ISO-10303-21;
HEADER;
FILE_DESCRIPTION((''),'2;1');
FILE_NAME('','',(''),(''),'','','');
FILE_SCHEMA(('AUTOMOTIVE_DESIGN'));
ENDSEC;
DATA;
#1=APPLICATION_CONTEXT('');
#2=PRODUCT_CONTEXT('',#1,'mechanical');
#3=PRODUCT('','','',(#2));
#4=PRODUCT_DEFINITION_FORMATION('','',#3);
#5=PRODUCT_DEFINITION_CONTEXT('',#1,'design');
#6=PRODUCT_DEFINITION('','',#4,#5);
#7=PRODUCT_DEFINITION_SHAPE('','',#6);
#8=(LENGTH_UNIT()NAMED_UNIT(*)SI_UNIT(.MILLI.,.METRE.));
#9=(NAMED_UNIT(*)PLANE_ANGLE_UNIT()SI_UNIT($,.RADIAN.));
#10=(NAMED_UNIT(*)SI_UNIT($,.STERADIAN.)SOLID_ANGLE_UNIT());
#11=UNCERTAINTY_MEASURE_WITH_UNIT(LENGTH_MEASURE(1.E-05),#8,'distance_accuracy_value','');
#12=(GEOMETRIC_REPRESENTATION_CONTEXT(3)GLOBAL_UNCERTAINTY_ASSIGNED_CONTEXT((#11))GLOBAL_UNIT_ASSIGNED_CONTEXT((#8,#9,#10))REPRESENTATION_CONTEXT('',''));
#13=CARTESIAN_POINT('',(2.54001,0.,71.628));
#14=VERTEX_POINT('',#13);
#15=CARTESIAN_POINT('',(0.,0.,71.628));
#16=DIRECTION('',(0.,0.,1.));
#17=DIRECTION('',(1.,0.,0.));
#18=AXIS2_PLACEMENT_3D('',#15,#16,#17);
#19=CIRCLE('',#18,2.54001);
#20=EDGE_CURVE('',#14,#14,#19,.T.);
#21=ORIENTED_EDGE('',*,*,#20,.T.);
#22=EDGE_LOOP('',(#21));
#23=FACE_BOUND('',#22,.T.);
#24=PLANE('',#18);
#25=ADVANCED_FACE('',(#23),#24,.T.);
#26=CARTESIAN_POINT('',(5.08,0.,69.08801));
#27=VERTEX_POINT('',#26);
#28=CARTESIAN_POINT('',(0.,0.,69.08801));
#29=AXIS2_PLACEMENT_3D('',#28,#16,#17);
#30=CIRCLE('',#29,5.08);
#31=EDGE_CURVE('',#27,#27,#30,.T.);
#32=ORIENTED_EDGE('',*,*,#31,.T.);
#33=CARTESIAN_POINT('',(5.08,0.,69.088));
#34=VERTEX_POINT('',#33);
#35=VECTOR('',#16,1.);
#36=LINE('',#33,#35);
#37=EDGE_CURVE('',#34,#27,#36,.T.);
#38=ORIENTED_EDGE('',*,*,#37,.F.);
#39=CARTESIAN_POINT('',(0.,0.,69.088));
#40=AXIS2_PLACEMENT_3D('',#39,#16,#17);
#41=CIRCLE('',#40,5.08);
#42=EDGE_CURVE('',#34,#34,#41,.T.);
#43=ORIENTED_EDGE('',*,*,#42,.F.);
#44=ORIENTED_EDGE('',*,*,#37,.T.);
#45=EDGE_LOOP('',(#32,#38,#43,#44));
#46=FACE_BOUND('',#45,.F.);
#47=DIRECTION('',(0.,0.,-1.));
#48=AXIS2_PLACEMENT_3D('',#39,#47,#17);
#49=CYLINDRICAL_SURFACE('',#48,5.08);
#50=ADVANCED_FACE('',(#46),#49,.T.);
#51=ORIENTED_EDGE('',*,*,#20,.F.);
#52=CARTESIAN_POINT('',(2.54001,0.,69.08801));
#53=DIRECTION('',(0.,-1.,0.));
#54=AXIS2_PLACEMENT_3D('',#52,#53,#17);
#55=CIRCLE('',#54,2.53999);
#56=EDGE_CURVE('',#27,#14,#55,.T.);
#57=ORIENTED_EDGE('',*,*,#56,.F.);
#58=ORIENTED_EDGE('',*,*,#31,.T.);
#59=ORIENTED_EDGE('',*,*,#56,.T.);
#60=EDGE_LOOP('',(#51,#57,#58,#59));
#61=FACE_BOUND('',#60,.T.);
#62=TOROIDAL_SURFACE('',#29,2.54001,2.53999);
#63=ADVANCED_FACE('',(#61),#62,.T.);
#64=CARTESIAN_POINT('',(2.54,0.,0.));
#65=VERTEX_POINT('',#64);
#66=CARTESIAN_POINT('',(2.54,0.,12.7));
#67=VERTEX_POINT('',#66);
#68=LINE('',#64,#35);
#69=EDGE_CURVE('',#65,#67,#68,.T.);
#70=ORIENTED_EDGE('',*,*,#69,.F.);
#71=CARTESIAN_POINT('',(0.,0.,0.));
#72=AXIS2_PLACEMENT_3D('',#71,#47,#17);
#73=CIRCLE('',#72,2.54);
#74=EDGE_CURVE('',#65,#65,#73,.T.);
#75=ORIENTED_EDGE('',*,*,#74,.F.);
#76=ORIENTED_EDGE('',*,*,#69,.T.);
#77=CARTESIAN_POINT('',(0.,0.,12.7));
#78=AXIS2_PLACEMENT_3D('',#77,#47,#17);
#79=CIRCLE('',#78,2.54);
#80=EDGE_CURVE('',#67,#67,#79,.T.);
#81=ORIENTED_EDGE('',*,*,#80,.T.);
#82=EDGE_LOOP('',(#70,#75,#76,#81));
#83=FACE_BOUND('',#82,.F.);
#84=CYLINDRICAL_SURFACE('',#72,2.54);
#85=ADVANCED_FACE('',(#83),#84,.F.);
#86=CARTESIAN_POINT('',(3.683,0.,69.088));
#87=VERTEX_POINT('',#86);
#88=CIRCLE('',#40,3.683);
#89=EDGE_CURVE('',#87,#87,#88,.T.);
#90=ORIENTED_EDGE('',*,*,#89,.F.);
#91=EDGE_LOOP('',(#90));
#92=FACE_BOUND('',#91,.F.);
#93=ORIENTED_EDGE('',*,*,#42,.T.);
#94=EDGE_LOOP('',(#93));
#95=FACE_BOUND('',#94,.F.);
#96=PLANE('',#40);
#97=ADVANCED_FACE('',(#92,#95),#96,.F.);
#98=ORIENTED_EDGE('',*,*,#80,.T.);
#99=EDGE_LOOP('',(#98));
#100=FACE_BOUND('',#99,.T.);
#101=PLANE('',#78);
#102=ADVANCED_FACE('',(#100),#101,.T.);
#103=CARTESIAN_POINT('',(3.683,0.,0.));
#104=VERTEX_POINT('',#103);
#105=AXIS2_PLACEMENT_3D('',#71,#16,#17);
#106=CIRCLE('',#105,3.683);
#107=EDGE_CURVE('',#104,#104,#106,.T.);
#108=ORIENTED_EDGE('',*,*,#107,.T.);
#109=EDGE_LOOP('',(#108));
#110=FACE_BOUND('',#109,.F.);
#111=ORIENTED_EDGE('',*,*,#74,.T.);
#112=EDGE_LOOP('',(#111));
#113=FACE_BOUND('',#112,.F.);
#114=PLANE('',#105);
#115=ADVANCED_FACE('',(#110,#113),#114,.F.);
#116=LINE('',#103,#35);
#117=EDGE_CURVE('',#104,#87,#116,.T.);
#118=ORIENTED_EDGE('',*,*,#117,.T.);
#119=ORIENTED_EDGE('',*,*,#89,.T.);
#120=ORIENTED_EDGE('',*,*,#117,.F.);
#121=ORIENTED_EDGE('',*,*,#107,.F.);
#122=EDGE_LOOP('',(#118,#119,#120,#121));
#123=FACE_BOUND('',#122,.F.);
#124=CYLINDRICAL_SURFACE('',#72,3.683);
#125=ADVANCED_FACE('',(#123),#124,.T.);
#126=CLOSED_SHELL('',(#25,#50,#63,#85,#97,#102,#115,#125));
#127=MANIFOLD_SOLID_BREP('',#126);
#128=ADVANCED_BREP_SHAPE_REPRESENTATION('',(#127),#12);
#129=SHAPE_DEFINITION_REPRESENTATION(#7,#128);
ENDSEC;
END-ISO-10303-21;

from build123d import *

# Parameters (mm, degrees)
F0_R     = 3.683
F1_DEPTH = 69.088
F2_R     = 5.08
F3_DEPTH = 2.54
F4_R     = 2.53999
F5_R     = 2.54
F6_DEPTH = 12.7


# Not quite as in the source:
# - a fillet or chamfer is up to 0.001 mm smaller than in the source, because OpenCascade refuses the exact size


with BuildPart() as f1:
    # F0 (on Top) → F1 (new body)
    with BuildSketch(Plane.XY):
        Circle(F0_R)
    extrude(amount=F1_DEPTH)

    # F2 (on face) → F3 (join)
    with BuildSketch(Plane.XY.offset(69.088)):
        Circle(F2_R)
    extrude(amount=F3_DEPTH)

    # F4 (radius 2.54 in the source; OpenCascade refuses exactly that, so slightly less here)
    f4_edges = [f1.edges().sort_by_distance(p)[0] for p in [
        (-5.08, 0, 71.628),
    ]]
    fillet(f4_edges, radius=F4_R)

    # F5 (on face) → F6 (cut)
    with BuildSketch(Plane(origin=(0, 0, 0), x_dir=(1, 0, 0), z_dir=(0, 0, -1))):
        Circle(F5_R)
    extrude(amount=-F6_DEPTH, mode=Mode.SUBTRACT)


solid = f1.part
